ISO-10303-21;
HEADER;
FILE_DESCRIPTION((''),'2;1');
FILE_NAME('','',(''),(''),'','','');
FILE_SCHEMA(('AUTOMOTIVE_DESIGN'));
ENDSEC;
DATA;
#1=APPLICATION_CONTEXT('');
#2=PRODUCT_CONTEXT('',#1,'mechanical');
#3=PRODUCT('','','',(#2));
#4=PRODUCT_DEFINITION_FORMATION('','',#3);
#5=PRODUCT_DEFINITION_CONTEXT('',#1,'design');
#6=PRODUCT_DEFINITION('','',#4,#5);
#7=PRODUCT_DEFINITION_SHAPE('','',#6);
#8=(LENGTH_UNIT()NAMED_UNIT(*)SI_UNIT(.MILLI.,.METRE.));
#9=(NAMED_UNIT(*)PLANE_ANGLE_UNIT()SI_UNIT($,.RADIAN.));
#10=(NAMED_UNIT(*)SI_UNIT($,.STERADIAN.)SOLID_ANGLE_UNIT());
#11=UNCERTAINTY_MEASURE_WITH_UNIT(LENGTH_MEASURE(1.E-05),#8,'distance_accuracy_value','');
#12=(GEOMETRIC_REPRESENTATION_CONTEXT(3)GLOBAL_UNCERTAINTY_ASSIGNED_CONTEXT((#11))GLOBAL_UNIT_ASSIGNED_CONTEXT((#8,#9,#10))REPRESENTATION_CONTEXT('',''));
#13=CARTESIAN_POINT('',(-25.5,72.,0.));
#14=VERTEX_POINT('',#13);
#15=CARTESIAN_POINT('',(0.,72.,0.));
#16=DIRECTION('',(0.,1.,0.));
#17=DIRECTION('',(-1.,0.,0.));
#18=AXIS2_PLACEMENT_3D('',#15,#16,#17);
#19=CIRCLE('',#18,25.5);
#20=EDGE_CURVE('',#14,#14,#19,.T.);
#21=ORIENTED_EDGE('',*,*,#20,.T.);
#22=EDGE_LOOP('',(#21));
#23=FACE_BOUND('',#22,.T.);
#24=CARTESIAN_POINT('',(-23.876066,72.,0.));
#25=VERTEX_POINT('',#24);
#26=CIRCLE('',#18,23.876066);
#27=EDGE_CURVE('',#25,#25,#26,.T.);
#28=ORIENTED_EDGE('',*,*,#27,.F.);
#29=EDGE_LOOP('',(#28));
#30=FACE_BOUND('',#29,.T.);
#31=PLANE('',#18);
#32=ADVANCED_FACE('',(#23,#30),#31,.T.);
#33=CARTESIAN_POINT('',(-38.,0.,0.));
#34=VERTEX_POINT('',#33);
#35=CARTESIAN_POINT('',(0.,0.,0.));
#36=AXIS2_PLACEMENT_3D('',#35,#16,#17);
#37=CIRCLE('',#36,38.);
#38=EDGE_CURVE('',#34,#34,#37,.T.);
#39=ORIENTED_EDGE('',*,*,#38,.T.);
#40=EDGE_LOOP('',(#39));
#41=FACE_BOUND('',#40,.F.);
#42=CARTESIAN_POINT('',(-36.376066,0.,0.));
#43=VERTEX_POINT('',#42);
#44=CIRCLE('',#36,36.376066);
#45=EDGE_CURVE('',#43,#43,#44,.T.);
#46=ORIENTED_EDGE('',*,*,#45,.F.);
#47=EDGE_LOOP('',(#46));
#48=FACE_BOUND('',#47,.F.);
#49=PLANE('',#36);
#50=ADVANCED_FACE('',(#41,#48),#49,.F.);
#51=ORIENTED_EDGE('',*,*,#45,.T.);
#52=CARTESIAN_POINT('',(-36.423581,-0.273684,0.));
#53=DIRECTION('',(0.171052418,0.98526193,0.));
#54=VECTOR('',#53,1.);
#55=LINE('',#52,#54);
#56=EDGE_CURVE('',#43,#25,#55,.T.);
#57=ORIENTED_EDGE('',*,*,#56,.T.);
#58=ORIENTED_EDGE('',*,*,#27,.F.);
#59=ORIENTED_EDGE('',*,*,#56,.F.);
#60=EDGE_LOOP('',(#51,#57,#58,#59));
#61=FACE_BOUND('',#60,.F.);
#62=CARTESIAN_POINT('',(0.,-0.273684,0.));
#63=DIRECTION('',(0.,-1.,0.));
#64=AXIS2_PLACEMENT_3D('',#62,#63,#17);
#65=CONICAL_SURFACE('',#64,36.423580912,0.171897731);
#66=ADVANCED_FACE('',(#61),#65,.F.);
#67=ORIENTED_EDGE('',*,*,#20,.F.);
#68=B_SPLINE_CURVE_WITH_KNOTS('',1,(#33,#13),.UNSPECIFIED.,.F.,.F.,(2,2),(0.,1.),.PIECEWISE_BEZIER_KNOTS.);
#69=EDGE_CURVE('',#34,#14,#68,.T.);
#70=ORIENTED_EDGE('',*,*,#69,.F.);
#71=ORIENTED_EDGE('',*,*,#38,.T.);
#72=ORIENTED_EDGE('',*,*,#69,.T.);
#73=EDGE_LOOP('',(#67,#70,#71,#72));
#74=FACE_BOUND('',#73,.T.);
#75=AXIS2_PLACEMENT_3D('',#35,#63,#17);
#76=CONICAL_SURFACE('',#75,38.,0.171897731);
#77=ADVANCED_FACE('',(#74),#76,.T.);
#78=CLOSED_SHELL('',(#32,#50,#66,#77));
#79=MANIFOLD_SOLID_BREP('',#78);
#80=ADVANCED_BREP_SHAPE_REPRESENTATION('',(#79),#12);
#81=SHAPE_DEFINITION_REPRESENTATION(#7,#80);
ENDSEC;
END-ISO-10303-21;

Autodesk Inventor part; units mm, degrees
ref_plane "YZ Plane" through (0, 0, 0) normal (1, 0, 0) x (0, 1, 0)
ref_plane "XY Plane" through (0, 0, 0) normal (0, 0, 1) x (1, 0, 0)
sketch "Szkic6" plane through (0, 0, 0) normal (0, 1, 0) x (-1, 0, 0)
  circle A0 centre (0, 0) radius 38
  dimension "d33" = 76
ref_plane "Płaszczyzna konstrukcyjna1" through (0, 72, 0) normal (0, 1, 0) x (-1, 0, 0)
sketch "Szkic7" plane through (0, 72, 0) normal (0, 1, 0) x (-1, 0, 0)
  circle A0 centre (0, 0) radius 25.5
  dimension "d35" = 51
loft "Wyciągnięcie złożone1" add profiles "Szkic6", "Szkic7"
shell "Skorupa1" thickness 1.6 removed faces 2 at (4.5479, 72, -4.6843) at (-9.1519, 0, 15.3991)
equation "\"d33\" = OD1"
equation "\"d35\" = OD2"
equation "\"d52\" = THK"
equation "\"SzerokośćGięciaPodcięcia\" = Grubość"
equation "\"RozmiarPodcięciaNarożnika\" = 4 * Grubość"
equation "\"PromieńPrzejścia\" = PromieńGięcia"
equation "\"Rozmiar_promienia_Jacobiego\" = PromieńGięcia"
equation "\"Wielk_odstępu\" = Grubość"
equation "\"d2\" = PromieńGięcia"
equation "\"d23\" = PromieńGięcia"
equation "\"OD1\" = 76"
equation "\"OD2\" = 51"
equation "\"L\" = 72"
equation "\"THK\" = 1.6"
equation "\"d34\" = L"
equation "\"Grubość\" = 1.5"
equation "\"PromieńGięcia\" = 3"
properties part number "Redukcja symetryczna Ø76x51x1,6 L=72" material "304"
